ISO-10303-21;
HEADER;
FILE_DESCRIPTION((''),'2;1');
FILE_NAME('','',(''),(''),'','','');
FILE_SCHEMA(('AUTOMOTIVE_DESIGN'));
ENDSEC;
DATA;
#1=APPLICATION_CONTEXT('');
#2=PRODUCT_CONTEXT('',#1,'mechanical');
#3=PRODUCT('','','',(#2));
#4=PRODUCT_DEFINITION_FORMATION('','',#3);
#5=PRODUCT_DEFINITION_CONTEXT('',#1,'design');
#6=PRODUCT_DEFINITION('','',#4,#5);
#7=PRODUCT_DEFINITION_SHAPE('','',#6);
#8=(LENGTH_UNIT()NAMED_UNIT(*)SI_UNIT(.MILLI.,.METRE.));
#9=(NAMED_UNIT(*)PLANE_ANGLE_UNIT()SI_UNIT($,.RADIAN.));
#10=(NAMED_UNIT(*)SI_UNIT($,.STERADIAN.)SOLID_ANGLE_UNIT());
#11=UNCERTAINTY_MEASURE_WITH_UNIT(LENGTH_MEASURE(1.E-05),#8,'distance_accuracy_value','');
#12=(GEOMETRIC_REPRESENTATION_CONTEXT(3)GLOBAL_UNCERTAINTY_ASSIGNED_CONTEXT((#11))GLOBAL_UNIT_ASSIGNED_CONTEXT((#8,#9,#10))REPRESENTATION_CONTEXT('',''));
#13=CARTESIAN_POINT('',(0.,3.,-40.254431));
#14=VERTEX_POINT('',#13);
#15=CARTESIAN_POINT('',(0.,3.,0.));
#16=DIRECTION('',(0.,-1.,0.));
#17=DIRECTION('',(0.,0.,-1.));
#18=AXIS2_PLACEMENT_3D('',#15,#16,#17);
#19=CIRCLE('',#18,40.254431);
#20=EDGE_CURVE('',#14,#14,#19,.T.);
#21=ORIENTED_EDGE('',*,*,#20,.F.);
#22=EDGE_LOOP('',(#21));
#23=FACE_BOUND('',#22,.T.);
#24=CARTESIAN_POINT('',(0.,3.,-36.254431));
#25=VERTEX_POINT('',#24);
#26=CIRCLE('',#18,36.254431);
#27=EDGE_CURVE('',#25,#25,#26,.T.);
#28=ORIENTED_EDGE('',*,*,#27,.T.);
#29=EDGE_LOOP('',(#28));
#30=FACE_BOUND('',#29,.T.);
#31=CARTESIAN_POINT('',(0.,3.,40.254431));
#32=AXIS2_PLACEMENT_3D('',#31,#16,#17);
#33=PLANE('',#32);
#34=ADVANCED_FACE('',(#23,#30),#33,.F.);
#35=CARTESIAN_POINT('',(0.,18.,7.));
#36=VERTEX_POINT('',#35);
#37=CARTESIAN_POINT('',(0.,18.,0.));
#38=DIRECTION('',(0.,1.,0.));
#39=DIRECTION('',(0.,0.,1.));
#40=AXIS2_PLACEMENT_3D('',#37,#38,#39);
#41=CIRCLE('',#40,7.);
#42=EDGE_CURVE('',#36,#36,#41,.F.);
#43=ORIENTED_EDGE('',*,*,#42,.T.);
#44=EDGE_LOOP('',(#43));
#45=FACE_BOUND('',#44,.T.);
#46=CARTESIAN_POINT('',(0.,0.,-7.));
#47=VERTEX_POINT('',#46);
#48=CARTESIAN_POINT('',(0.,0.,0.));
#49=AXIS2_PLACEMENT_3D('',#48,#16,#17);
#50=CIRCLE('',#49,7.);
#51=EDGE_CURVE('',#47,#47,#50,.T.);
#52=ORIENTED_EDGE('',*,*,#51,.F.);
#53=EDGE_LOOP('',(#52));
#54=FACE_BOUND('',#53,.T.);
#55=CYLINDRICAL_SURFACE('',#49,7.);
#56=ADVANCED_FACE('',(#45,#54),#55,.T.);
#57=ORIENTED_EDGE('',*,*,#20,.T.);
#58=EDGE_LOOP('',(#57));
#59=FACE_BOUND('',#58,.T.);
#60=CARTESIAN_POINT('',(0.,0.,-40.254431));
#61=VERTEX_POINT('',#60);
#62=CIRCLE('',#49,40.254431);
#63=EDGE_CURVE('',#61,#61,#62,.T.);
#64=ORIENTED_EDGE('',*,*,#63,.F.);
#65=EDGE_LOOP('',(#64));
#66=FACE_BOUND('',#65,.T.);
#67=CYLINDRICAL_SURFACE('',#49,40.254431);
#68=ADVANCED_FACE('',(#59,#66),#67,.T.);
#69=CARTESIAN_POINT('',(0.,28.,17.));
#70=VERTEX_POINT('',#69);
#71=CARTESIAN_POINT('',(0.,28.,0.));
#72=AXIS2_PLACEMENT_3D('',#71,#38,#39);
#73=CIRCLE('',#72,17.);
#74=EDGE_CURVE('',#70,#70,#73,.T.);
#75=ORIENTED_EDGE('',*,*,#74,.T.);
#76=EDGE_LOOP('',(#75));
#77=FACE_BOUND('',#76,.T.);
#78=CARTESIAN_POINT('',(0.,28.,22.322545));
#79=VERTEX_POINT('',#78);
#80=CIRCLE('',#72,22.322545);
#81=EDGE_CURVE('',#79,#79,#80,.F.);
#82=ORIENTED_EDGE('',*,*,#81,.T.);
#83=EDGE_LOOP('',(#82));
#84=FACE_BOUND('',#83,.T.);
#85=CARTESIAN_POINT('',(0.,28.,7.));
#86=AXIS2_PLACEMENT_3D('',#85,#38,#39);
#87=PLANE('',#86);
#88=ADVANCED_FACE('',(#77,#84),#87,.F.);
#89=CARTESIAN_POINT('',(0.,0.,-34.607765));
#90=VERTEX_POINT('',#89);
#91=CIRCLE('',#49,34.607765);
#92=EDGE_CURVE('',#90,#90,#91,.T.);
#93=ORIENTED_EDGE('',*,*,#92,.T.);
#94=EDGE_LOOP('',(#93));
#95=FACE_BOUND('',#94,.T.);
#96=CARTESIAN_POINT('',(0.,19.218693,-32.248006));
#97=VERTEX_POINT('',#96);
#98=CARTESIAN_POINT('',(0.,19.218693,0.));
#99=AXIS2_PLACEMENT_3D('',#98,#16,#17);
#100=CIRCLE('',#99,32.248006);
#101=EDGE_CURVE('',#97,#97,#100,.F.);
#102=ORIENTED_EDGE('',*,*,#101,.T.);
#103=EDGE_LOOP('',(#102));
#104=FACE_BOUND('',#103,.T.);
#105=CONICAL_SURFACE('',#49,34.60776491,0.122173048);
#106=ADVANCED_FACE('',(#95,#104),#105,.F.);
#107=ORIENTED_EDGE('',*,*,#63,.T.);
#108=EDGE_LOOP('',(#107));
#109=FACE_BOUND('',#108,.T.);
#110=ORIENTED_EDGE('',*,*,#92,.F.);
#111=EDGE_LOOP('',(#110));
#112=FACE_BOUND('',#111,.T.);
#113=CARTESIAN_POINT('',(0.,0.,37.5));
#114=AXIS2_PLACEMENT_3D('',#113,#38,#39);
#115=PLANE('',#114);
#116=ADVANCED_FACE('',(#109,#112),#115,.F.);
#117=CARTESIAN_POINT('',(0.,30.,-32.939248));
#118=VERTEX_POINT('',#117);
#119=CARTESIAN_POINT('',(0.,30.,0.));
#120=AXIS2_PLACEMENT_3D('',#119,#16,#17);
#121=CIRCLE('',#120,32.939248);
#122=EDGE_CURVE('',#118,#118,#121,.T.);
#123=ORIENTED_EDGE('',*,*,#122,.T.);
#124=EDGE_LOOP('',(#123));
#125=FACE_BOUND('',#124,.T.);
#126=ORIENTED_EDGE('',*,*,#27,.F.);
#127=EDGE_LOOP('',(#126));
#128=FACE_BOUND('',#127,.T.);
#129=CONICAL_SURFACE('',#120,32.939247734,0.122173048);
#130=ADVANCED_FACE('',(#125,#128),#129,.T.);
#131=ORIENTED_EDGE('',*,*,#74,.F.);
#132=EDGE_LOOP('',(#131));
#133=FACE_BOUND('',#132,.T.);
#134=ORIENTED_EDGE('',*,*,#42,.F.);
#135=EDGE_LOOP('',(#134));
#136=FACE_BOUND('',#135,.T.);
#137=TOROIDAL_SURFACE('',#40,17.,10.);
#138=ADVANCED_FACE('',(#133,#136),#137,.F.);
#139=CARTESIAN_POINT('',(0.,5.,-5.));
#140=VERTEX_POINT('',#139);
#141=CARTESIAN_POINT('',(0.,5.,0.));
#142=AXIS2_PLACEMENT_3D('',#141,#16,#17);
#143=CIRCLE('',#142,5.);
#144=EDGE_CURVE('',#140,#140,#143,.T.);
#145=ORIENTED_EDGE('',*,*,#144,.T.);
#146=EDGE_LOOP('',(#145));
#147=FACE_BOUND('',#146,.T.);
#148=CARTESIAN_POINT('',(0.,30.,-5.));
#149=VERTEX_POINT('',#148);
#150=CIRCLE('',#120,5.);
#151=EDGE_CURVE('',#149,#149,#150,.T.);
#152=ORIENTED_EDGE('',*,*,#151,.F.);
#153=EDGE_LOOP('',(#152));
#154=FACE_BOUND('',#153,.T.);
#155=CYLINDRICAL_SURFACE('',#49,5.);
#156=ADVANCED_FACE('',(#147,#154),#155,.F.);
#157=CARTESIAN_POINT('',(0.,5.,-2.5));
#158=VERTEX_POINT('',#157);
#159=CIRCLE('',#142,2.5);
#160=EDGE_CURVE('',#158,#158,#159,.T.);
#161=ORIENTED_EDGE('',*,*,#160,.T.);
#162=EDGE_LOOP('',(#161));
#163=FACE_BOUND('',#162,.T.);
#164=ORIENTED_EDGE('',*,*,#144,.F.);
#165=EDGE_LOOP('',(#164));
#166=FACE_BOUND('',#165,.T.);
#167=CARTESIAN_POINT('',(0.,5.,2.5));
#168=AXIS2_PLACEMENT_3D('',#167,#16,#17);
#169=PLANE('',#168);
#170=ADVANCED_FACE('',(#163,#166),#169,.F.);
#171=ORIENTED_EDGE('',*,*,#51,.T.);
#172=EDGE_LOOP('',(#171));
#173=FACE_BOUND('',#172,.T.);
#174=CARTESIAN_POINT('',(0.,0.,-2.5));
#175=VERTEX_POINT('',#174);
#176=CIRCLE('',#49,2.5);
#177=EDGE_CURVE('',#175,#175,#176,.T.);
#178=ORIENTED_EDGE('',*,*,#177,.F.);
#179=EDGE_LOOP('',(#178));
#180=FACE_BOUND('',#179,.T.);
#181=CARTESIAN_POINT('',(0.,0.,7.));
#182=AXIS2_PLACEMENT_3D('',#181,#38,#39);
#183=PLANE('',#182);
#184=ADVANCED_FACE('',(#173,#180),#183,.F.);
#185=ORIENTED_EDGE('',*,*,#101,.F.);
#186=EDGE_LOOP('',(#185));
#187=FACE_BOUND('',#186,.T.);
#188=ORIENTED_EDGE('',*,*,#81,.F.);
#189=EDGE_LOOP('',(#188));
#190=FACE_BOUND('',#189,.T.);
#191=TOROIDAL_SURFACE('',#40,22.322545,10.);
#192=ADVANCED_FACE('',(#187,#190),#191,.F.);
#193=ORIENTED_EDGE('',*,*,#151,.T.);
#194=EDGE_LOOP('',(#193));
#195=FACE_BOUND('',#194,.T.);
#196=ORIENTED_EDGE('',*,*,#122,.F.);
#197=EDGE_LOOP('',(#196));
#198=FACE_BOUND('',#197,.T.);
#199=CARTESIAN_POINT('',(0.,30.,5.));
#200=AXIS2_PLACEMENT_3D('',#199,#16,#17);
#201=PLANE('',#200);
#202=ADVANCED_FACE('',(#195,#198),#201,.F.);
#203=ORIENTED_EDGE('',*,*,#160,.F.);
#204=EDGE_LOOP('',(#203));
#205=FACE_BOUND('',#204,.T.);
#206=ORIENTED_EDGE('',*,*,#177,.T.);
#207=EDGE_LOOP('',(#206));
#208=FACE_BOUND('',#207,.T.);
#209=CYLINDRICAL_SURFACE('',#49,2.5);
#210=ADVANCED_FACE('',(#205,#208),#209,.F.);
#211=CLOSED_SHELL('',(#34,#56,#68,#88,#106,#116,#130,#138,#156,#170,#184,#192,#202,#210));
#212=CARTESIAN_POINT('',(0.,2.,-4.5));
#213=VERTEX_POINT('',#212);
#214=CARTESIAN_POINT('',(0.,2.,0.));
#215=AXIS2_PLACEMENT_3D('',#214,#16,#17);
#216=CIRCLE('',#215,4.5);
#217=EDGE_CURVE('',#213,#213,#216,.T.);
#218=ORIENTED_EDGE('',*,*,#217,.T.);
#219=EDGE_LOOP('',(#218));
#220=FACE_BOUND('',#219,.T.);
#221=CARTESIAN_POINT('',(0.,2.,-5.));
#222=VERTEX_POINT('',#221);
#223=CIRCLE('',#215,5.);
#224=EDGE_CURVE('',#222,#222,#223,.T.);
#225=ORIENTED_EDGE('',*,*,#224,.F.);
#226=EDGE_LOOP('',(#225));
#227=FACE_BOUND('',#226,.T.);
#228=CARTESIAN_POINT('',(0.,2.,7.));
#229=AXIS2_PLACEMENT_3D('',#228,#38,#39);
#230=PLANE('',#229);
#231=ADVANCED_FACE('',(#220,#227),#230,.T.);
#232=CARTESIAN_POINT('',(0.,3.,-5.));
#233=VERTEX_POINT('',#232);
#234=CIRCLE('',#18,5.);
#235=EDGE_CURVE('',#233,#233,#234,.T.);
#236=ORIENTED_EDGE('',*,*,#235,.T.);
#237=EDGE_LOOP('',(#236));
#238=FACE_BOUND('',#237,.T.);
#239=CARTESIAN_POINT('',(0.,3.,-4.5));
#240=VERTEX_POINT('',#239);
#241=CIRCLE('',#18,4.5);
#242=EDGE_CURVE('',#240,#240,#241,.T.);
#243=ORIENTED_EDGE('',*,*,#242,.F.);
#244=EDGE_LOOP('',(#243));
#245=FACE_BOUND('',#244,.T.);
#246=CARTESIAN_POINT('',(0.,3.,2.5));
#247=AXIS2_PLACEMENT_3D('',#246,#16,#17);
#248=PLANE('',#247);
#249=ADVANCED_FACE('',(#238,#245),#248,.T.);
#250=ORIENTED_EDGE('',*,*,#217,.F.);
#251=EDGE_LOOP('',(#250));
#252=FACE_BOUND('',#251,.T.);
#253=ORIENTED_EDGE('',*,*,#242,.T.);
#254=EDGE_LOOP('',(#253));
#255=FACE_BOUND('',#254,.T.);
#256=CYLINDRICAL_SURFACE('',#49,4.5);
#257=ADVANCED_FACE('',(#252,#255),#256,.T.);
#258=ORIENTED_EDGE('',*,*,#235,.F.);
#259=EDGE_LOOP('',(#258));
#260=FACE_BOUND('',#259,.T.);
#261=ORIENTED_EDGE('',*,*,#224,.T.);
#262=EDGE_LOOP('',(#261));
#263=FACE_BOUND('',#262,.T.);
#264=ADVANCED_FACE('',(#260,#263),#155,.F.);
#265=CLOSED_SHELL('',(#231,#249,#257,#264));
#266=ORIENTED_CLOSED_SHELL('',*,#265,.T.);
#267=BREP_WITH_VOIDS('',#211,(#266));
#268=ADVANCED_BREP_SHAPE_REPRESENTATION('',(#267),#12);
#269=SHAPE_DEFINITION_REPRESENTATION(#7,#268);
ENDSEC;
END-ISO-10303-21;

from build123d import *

# Parameters (mm, degrees)
R_VOL_MINCE1_OUTLINE_W = 0.5
R_VOL_MINCE1_OUTLINE_H = 1
CONG_2_R               = 10
CONG_3_R               = 10


# Read off the part's stored shape, not the designer's step: Révol.-Mince1
with BuildPart() as part:
    # Révol.-Mince1 outline → Révol.-Mince1 (revolve)
    with BuildSketch(Plane.XY):
        Polygon((2.5, 5), (2.5, 0), (7, 0), (7, 28), (31.169797205, 28), (34.60776491, 0), (40.254430878, 0), (40.254430878, 3), (36.254430878, 3), (32.939247734, 30), (5, 30), (5, 5), align=None)
        with Locations((4.75, 2.5)):
            Rectangle(R_VOL_MINCE1_OUTLINE_W, R_VOL_MINCE1_OUTLINE_H, mode=Mode.SUBTRACT)
    revolve(axis=Axis((0, 0, 0), (0, 1, 0)))

    # Congé2
    cong_2_edges = [part.edges().sort_by_distance(p)[0] for p in [
        (-31.169797205, 28, 0),
    ]]
    fillet(cong_2_edges, radius=CONG_2_R)

    # Congé3
    cong_3_edges = [part.edges().sort_by_distance(p)[0] for p in [
        (-7, 28, 0),
    ]]
    fillet(cong_3_edges, radius=CONG_3_R)


solid = part.part
